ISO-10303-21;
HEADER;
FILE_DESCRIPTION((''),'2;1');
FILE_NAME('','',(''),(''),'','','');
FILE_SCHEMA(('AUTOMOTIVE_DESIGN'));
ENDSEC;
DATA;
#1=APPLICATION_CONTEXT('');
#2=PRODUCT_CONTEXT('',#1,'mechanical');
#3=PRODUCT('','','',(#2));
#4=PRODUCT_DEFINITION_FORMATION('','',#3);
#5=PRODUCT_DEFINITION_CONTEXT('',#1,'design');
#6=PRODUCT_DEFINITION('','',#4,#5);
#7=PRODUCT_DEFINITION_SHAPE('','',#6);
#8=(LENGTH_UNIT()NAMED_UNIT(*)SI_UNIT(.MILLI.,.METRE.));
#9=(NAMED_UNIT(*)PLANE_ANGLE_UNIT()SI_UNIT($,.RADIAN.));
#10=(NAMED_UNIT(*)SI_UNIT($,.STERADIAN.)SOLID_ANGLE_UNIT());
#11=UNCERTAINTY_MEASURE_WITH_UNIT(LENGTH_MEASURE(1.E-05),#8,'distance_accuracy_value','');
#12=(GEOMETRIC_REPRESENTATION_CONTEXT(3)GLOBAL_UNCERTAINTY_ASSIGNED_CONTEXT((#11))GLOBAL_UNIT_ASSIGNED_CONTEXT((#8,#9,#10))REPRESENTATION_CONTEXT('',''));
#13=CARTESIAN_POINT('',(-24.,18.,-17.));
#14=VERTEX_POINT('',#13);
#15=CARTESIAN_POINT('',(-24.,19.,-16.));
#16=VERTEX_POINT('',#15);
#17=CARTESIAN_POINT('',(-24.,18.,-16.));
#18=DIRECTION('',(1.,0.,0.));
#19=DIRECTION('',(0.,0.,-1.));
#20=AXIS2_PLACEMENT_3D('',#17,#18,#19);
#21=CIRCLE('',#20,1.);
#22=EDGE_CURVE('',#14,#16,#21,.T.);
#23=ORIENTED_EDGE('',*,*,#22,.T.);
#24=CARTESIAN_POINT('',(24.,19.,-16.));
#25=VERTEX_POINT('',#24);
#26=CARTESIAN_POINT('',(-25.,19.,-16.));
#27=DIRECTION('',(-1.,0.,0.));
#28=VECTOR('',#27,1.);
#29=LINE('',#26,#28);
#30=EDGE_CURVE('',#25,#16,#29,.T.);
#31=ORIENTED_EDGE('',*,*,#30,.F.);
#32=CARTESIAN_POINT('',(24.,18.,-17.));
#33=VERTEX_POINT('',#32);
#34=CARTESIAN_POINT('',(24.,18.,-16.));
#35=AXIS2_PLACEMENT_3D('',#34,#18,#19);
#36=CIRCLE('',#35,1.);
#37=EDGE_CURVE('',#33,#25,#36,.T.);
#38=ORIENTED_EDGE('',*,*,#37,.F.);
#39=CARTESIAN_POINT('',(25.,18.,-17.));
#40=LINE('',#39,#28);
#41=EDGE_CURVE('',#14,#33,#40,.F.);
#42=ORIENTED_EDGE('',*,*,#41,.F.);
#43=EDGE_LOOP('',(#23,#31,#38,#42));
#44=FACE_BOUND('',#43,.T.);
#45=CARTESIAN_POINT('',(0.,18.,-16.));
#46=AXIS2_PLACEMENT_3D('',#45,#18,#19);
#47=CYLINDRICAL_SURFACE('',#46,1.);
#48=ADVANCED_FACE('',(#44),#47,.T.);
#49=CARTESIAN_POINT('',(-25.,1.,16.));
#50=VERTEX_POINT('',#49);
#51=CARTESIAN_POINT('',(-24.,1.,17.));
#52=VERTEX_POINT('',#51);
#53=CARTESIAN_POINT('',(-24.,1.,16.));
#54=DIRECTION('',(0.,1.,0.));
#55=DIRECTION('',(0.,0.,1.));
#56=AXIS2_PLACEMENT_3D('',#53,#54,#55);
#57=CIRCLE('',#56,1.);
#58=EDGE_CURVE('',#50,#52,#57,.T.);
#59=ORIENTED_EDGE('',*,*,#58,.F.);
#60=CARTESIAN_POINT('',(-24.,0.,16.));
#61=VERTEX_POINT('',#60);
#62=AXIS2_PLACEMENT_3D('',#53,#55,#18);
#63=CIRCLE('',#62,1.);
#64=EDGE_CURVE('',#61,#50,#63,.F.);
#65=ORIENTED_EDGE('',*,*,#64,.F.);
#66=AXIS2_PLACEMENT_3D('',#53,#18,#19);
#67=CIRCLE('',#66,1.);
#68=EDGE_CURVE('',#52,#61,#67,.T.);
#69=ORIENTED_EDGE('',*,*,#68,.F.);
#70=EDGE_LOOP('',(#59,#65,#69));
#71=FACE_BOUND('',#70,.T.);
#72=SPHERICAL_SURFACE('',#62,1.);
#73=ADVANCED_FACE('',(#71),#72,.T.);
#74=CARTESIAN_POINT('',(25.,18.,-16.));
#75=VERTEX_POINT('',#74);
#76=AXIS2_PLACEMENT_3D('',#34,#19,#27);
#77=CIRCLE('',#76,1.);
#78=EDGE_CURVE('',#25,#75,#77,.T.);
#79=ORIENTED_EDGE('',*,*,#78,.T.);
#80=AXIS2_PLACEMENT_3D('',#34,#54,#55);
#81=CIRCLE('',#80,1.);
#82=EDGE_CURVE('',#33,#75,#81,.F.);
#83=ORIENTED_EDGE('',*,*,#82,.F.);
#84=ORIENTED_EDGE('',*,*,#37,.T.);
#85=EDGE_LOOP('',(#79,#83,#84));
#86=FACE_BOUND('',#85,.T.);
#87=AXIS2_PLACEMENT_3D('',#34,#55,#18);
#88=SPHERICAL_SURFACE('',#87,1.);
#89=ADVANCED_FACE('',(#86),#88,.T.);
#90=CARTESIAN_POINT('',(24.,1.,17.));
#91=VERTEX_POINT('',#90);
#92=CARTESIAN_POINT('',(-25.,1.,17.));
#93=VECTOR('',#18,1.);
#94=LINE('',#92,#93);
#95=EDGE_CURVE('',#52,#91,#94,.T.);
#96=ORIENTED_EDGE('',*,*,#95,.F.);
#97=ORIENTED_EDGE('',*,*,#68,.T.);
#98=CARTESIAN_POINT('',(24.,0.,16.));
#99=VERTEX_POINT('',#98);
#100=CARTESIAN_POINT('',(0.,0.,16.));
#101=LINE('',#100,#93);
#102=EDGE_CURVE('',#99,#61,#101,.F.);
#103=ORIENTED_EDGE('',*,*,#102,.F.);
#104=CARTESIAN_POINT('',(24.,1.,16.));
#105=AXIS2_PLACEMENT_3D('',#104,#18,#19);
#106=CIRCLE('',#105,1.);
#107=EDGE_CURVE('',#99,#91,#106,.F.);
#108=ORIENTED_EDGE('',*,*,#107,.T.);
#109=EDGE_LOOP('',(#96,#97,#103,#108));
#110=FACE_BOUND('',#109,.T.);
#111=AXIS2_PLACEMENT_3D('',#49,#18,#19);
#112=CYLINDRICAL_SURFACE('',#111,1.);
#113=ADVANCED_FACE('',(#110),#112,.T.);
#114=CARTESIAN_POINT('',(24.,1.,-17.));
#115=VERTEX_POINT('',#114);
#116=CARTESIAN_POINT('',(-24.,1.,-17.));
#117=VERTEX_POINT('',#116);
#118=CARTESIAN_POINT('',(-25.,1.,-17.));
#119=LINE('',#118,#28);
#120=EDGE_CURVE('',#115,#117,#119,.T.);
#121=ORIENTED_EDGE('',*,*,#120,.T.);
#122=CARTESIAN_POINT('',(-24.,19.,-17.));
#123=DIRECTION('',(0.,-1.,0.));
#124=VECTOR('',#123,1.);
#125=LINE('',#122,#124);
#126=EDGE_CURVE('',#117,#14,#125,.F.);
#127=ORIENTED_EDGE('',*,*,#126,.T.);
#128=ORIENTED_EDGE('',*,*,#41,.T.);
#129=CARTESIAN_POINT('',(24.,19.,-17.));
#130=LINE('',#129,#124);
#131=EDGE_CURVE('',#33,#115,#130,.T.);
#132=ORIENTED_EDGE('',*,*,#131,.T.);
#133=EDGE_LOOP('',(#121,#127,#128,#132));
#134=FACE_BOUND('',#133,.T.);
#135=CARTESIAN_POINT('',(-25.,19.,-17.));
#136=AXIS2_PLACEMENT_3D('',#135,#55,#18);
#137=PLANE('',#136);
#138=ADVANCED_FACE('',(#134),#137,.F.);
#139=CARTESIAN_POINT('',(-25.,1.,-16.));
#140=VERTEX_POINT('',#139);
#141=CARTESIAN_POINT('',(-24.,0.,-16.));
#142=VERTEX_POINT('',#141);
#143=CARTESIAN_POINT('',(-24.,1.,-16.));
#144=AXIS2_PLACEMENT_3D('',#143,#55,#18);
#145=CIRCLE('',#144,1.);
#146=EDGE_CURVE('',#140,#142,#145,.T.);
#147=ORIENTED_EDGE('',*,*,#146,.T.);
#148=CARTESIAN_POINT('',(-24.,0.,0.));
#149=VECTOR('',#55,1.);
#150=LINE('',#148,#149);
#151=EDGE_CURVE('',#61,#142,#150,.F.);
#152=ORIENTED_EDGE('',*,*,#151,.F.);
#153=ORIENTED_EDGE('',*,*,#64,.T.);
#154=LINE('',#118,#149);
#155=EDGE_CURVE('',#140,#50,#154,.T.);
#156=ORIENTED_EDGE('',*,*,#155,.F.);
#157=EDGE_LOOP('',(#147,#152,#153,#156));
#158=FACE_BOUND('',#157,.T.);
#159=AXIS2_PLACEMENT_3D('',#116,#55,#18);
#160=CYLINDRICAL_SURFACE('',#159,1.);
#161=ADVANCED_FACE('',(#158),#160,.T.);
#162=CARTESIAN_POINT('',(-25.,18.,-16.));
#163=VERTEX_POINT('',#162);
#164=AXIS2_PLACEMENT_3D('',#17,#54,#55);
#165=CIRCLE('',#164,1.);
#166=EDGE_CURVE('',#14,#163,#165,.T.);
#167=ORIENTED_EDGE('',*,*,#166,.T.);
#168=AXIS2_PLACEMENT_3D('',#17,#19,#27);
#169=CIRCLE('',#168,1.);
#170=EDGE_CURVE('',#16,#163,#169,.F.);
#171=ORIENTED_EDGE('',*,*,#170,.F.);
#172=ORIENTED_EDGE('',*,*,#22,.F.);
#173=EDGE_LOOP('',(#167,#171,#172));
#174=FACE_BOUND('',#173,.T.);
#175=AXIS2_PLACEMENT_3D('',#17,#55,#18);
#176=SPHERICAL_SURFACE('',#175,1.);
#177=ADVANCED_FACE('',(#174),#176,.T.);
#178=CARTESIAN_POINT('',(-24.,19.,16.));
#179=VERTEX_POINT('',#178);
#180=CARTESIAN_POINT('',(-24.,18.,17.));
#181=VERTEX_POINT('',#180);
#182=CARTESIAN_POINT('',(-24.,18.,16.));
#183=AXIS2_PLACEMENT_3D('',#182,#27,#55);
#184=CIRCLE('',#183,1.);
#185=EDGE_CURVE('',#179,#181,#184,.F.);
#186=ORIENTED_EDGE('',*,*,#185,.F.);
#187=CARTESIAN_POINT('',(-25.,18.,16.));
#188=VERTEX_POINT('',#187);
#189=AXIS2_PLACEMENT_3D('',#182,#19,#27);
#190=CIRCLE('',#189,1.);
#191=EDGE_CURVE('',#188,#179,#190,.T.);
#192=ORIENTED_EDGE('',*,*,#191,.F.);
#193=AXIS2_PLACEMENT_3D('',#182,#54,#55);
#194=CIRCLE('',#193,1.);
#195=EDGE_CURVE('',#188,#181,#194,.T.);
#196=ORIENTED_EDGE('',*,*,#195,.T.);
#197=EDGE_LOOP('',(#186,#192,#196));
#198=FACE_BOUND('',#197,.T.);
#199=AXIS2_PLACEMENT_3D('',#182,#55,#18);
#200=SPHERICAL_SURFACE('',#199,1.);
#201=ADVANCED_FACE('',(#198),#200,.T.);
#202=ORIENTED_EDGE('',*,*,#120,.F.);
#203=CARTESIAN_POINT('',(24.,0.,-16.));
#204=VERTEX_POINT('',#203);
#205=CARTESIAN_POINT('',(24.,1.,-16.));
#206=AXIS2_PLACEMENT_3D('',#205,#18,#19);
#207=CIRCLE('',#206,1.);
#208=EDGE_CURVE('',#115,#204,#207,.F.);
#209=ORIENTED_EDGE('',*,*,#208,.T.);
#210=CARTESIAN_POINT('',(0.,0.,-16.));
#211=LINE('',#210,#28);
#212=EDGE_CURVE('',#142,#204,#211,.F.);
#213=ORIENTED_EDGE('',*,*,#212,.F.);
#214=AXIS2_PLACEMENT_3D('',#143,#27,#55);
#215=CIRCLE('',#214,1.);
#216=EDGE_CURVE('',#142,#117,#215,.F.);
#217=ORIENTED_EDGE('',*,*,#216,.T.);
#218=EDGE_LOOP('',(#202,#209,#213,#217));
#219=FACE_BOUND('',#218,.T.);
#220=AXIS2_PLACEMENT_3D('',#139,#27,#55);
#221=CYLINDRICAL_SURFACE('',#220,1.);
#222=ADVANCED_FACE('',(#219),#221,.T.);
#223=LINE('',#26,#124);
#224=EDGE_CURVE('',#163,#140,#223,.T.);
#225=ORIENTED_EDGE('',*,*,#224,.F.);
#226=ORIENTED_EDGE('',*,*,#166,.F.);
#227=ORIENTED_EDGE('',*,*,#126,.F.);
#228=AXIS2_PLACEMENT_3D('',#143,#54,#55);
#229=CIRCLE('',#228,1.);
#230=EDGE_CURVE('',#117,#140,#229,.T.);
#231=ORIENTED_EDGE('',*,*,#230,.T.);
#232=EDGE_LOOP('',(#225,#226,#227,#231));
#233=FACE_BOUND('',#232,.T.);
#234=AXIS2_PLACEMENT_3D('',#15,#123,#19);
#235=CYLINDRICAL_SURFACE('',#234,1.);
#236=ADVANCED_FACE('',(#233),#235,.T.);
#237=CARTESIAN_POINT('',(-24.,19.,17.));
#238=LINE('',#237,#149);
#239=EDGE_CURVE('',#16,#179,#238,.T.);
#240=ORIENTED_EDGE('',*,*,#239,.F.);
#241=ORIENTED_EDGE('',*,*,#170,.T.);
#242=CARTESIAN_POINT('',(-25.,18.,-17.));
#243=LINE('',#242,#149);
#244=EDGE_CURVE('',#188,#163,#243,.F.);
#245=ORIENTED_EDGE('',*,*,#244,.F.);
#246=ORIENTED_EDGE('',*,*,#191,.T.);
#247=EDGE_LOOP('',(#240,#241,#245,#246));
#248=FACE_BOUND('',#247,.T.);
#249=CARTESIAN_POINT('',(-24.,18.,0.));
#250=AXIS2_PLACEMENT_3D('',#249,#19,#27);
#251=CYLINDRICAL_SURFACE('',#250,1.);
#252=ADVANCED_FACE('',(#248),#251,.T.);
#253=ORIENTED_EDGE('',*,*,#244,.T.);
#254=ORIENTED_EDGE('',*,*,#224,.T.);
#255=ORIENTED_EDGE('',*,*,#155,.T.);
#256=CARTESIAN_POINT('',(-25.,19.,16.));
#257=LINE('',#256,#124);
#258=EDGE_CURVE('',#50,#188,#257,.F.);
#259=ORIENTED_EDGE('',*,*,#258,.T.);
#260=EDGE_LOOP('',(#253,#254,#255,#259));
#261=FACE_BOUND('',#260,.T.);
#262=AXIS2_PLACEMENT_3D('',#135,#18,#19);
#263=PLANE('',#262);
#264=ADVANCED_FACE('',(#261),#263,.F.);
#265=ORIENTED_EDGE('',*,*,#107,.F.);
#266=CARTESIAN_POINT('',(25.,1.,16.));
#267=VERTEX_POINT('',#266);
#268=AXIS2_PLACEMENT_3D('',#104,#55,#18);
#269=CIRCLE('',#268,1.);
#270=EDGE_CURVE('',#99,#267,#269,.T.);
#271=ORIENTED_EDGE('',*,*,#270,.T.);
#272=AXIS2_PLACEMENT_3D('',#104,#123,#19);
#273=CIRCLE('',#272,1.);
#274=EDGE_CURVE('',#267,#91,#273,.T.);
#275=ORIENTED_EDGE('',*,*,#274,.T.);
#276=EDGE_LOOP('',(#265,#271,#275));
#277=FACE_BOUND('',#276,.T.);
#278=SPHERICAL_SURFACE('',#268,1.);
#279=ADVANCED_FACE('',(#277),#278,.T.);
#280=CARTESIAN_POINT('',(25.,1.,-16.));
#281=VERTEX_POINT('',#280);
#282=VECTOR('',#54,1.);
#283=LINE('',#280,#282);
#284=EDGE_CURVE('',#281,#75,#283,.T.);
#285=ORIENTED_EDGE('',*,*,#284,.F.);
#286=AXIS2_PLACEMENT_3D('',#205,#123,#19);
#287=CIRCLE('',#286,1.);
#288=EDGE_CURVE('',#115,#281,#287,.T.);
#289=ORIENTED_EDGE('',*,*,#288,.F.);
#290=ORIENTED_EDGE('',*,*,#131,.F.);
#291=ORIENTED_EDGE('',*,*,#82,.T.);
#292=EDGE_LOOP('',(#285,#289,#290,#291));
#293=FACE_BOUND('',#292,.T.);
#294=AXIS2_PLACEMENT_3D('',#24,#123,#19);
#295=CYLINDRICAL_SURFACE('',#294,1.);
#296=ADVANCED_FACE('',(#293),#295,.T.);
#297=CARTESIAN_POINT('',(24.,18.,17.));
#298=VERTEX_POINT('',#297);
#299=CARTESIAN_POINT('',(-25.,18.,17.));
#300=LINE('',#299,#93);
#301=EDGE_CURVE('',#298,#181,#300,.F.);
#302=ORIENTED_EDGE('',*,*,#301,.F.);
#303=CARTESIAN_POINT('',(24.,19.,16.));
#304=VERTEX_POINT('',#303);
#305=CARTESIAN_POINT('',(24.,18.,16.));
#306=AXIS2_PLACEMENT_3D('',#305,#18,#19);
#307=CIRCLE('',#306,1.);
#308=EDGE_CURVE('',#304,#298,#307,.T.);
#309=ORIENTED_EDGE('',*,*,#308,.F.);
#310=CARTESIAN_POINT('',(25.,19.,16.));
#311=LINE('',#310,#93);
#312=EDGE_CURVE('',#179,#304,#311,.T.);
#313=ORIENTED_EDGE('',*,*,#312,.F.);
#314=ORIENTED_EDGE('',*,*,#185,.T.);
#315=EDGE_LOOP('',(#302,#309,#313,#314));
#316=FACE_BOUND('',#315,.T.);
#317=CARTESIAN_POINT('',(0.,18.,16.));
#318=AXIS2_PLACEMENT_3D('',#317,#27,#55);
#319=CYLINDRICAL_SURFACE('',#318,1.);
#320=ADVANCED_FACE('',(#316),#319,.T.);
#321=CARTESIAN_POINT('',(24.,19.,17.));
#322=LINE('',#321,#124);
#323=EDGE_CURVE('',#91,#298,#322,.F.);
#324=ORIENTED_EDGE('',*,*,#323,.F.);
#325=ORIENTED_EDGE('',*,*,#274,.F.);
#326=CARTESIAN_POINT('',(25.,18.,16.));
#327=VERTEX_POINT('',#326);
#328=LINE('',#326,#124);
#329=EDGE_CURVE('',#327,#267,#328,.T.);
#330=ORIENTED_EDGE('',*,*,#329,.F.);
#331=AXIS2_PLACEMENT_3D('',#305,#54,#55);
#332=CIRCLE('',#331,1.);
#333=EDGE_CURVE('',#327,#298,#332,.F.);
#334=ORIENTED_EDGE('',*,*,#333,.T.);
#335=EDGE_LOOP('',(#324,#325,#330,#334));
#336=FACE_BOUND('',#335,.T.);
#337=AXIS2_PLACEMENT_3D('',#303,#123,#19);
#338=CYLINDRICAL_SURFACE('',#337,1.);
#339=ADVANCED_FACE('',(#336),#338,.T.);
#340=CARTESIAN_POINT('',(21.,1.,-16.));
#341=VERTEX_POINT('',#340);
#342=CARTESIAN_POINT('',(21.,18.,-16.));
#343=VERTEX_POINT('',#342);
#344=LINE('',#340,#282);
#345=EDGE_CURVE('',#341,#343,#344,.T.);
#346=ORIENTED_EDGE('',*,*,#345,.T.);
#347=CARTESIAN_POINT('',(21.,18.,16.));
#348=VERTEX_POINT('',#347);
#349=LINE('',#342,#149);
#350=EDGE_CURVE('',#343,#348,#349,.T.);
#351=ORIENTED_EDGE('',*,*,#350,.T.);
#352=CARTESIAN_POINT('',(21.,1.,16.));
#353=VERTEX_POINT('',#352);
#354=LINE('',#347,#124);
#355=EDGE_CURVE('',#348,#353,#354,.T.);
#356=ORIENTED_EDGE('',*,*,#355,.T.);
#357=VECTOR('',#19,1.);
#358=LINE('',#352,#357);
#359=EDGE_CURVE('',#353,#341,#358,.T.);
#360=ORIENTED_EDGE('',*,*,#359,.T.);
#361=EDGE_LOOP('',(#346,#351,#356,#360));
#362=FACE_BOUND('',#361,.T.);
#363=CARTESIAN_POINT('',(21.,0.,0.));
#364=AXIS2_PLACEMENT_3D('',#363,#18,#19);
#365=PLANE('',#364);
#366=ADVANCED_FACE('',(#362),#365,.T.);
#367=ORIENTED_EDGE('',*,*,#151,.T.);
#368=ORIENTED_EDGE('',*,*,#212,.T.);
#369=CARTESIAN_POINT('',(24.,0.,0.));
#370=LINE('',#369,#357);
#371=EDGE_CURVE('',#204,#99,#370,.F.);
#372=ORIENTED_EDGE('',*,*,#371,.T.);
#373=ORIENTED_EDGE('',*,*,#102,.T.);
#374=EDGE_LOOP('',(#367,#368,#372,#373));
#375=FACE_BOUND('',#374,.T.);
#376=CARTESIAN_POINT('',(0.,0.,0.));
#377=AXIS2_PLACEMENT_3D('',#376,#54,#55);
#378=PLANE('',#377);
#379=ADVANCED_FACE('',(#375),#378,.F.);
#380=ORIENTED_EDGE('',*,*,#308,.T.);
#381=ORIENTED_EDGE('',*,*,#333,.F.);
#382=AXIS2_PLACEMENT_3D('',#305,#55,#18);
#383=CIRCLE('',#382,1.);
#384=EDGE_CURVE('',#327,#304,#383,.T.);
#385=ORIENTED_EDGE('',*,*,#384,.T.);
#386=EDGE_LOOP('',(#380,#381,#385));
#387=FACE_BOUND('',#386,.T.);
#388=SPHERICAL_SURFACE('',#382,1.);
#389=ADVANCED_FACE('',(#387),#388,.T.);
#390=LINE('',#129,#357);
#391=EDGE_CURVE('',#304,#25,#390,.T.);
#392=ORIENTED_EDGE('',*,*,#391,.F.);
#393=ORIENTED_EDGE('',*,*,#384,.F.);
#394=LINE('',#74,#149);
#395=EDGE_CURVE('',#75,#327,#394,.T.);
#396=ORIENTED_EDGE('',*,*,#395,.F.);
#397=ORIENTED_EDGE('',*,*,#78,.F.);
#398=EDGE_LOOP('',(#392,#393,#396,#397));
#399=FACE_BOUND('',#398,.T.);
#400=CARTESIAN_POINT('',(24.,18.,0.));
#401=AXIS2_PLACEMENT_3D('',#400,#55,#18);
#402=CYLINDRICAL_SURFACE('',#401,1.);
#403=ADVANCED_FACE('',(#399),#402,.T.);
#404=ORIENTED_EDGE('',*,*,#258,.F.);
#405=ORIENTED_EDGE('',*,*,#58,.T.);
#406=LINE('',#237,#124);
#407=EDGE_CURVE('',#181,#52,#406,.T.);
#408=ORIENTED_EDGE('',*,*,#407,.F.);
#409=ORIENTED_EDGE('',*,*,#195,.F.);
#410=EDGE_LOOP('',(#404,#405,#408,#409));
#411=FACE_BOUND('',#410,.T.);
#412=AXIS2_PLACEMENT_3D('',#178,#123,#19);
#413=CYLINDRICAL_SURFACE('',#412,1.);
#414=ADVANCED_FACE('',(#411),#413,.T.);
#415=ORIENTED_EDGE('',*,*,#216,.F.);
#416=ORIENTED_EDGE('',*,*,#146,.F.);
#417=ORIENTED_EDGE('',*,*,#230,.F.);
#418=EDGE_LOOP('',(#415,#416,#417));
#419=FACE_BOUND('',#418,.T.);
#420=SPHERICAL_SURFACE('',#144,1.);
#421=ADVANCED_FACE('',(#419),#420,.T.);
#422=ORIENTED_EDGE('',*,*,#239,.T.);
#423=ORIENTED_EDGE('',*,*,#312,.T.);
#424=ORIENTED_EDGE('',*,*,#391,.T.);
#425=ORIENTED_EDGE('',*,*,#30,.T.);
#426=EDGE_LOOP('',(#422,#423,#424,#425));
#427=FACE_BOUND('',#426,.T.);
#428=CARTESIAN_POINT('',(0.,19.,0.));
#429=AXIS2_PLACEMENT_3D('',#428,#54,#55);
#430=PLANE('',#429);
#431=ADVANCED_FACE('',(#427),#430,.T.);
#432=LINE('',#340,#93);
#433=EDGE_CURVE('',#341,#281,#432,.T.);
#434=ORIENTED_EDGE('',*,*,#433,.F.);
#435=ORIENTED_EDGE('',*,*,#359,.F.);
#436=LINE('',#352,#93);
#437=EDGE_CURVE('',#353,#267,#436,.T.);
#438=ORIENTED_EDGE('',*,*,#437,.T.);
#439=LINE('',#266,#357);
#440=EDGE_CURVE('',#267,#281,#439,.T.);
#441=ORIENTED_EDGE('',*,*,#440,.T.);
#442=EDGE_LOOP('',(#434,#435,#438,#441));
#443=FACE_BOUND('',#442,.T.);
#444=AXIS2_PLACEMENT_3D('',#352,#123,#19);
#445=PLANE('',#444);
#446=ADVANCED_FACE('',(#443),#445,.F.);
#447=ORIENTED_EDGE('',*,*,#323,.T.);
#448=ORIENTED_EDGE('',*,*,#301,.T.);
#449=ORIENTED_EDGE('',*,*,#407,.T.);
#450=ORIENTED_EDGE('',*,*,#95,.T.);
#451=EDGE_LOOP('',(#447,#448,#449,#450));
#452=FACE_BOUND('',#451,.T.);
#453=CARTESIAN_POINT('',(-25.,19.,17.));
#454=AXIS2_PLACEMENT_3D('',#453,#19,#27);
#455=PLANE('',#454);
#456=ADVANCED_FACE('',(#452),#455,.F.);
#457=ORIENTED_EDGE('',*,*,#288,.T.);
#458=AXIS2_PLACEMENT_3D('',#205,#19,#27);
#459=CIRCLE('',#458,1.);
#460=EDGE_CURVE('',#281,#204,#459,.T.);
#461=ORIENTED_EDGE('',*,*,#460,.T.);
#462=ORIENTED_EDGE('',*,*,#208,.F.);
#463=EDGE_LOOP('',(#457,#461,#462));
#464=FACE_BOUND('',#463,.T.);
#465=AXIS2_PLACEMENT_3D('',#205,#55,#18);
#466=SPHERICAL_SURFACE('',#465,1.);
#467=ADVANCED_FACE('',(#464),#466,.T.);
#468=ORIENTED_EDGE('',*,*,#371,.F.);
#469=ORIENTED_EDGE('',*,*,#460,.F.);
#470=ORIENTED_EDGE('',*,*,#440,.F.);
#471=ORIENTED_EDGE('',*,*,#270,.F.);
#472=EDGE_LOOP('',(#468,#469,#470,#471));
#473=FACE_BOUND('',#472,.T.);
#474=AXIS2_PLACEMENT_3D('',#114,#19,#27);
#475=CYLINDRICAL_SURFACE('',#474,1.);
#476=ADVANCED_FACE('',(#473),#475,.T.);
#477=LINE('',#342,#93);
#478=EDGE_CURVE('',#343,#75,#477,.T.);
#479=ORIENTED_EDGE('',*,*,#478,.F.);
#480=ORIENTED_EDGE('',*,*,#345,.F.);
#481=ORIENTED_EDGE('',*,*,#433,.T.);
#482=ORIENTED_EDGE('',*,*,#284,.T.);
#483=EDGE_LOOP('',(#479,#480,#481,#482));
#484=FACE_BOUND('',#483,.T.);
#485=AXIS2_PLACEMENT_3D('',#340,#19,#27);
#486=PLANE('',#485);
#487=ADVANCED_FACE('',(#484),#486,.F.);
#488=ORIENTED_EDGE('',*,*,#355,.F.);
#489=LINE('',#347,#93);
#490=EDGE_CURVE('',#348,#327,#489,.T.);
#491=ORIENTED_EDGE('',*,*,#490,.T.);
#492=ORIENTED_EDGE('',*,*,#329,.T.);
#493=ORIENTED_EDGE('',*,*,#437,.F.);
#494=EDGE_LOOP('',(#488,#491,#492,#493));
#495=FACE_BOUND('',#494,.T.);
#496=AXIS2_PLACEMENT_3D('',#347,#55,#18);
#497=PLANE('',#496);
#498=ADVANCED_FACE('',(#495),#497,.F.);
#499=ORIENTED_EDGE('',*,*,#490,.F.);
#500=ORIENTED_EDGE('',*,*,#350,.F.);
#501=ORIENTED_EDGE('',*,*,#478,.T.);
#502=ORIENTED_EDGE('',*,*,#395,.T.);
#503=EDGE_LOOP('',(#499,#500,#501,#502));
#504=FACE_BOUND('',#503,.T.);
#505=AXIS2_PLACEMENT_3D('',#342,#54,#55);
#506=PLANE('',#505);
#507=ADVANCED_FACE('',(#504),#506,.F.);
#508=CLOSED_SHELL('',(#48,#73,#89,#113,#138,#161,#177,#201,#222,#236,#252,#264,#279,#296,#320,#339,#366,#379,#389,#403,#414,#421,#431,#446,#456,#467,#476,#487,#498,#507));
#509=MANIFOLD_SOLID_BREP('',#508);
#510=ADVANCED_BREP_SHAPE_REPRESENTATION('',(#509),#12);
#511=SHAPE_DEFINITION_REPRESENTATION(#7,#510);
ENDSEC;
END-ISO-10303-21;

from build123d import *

# Parameters (mm, degrees)
SKETCH1_W           = 50
SKETCH1_H           = 34
BOSS_EXTRUDE1_DEPTH = 19
SKETCH2_W           = 32
SKETCH2_H           = 17
CUT_EXTRUDE1_DEPTH  = 4
FILLET1_R           = 1
FILLET2_R           = 1


# Some blends are built 0.0001 mm under size
with BuildPart() as part:
    # Sketch1 → Boss-Extrude1 (new body)
    with BuildSketch(Plane(origin=(0, 0, 0), x_dir=(1, 0, 0), z_dir=(0, 1, 0))):
        Rectangle(SKETCH1_W, SKETCH1_H)
    extrude(amount=BOSS_EXTRUDE1_DEPTH)

    # Sketch2 → Cut-Extrude1 (cut)
    with BuildSketch(Plane(origin=(25, 0, 0), x_dir=(0, 0, -1), z_dir=(1, 0, 0))):
        with Locations((0, 9.5)):
            Rectangle(SKETCH2_W, SKETCH2_H)
    extrude(amount=-CUT_EXTRUDE1_DEPTH, mode=Mode.SUBTRACT)

    # Fillet1
    fillet1_edges = [part.edges().sort_by_distance(p)[0] for p in [
        (-25, 19, 0),
        (0, 19, 17),
        (25, 19, 0),
        (0, 0, 17),
        (-25, 0, 0),
        (0, 0, -17),
        (25, 0, 0),
        (0, 19, -17),
        (25, 9.5, 17),
        (25, 9.5, -17),
    ]]
    fillet(fillet1_edges, radius=FILLET1_R - 0.0001)  # a hair under: the kernel refuses the full size

    # Fillet2
    # the kernel refuses this fillet: 1 mm, written as the material it takes off along each edge
    with BuildSketch(Plane(origin=(-24, 19, -16), x_dir=(0, 0, -1), z_dir=(1, 0, 0))) as fillet2_piece_1:
        with BuildLine():
            CenterArc((0.0001, -0.9999), 0.9999, 0, 90)
            Line((1, -0.9999), (1, 0))
            Line((1, 0), (0.0001, 0))
        make_face()
    revolve(axis=Axis((-24, 19, -16), (0, 1, 0)), revolution_arc=90, mode=Mode.SUBTRACT)
    with BuildSketch(Plane(origin=(-24, 19, 16), x_dir=(-1, 0, 0), z_dir=(0, 0, -1))) as fillet2_piece_2:
        with BuildLine():
            CenterArc((0.0001, -0.9999), 0.9999, 0, 90)
            Line((1, -0.9999), (1, 0))
            Line((1, 0), (0.0001, 0))
        make_face()
    revolve(axis=Axis((-24, 19, 16), (0, 1, 0)), revolution_arc=90, mode=Mode.SUBTRACT)
    with BuildSketch(Plane(origin=(-24, 0, -16), x_dir=(-1, 0, 0), z_dir=(0, 0, 1))) as fillet2_piece_3:
        with BuildLine():
            CenterArc((0.0001, -0.9999), 0.9999, 0, 90)
            Line((1, -0.9999), (1, 0))
            Line((1, 0), (0.0001, 0))
        make_face()
    revolve(axis=Axis((-24, 0, -16), (0, -1, 0)), revolution_arc=90, mode=Mode.SUBTRACT)
    with BuildSketch(Plane(origin=(-24, 0, 16), x_dir=(0, 0, 1), z_dir=(1, 0, 0))) as fillet2_piece_4:
        with BuildLine():
            CenterArc((0.0001, -0.9999), 0.9999, 0, 90)
            Line((1, -0.9999), (1, 0))
            Line((1, 0), (0.0001, 0))
        make_face()
    revolve(axis=Axis((-24, 0, 16), (0, -1, 0)), revolution_arc=90, mode=Mode.SUBTRACT)
    with BuildSketch(Plane(origin=(-25, 0, 17), x_dir=(0, 0, -1), z_dir=(0, 1, 0)), Plane(origin=(-25, 0, -17), x_dir=(1, 0, 0), z_dir=(0, 1, 0))) as fillet2_piece_5:
        with BuildLine():
            CenterArc((FILLET2_R, -FILLET2_R), FILLET2_R, 90, 90)
            Line((0, -FILLET2_R), (0, 0))
            Line((0, 0), (FILLET2_R, 0))
        make_face()
    extrude(amount=19, mode=Mode.SUBTRACT)


solid = part.part
